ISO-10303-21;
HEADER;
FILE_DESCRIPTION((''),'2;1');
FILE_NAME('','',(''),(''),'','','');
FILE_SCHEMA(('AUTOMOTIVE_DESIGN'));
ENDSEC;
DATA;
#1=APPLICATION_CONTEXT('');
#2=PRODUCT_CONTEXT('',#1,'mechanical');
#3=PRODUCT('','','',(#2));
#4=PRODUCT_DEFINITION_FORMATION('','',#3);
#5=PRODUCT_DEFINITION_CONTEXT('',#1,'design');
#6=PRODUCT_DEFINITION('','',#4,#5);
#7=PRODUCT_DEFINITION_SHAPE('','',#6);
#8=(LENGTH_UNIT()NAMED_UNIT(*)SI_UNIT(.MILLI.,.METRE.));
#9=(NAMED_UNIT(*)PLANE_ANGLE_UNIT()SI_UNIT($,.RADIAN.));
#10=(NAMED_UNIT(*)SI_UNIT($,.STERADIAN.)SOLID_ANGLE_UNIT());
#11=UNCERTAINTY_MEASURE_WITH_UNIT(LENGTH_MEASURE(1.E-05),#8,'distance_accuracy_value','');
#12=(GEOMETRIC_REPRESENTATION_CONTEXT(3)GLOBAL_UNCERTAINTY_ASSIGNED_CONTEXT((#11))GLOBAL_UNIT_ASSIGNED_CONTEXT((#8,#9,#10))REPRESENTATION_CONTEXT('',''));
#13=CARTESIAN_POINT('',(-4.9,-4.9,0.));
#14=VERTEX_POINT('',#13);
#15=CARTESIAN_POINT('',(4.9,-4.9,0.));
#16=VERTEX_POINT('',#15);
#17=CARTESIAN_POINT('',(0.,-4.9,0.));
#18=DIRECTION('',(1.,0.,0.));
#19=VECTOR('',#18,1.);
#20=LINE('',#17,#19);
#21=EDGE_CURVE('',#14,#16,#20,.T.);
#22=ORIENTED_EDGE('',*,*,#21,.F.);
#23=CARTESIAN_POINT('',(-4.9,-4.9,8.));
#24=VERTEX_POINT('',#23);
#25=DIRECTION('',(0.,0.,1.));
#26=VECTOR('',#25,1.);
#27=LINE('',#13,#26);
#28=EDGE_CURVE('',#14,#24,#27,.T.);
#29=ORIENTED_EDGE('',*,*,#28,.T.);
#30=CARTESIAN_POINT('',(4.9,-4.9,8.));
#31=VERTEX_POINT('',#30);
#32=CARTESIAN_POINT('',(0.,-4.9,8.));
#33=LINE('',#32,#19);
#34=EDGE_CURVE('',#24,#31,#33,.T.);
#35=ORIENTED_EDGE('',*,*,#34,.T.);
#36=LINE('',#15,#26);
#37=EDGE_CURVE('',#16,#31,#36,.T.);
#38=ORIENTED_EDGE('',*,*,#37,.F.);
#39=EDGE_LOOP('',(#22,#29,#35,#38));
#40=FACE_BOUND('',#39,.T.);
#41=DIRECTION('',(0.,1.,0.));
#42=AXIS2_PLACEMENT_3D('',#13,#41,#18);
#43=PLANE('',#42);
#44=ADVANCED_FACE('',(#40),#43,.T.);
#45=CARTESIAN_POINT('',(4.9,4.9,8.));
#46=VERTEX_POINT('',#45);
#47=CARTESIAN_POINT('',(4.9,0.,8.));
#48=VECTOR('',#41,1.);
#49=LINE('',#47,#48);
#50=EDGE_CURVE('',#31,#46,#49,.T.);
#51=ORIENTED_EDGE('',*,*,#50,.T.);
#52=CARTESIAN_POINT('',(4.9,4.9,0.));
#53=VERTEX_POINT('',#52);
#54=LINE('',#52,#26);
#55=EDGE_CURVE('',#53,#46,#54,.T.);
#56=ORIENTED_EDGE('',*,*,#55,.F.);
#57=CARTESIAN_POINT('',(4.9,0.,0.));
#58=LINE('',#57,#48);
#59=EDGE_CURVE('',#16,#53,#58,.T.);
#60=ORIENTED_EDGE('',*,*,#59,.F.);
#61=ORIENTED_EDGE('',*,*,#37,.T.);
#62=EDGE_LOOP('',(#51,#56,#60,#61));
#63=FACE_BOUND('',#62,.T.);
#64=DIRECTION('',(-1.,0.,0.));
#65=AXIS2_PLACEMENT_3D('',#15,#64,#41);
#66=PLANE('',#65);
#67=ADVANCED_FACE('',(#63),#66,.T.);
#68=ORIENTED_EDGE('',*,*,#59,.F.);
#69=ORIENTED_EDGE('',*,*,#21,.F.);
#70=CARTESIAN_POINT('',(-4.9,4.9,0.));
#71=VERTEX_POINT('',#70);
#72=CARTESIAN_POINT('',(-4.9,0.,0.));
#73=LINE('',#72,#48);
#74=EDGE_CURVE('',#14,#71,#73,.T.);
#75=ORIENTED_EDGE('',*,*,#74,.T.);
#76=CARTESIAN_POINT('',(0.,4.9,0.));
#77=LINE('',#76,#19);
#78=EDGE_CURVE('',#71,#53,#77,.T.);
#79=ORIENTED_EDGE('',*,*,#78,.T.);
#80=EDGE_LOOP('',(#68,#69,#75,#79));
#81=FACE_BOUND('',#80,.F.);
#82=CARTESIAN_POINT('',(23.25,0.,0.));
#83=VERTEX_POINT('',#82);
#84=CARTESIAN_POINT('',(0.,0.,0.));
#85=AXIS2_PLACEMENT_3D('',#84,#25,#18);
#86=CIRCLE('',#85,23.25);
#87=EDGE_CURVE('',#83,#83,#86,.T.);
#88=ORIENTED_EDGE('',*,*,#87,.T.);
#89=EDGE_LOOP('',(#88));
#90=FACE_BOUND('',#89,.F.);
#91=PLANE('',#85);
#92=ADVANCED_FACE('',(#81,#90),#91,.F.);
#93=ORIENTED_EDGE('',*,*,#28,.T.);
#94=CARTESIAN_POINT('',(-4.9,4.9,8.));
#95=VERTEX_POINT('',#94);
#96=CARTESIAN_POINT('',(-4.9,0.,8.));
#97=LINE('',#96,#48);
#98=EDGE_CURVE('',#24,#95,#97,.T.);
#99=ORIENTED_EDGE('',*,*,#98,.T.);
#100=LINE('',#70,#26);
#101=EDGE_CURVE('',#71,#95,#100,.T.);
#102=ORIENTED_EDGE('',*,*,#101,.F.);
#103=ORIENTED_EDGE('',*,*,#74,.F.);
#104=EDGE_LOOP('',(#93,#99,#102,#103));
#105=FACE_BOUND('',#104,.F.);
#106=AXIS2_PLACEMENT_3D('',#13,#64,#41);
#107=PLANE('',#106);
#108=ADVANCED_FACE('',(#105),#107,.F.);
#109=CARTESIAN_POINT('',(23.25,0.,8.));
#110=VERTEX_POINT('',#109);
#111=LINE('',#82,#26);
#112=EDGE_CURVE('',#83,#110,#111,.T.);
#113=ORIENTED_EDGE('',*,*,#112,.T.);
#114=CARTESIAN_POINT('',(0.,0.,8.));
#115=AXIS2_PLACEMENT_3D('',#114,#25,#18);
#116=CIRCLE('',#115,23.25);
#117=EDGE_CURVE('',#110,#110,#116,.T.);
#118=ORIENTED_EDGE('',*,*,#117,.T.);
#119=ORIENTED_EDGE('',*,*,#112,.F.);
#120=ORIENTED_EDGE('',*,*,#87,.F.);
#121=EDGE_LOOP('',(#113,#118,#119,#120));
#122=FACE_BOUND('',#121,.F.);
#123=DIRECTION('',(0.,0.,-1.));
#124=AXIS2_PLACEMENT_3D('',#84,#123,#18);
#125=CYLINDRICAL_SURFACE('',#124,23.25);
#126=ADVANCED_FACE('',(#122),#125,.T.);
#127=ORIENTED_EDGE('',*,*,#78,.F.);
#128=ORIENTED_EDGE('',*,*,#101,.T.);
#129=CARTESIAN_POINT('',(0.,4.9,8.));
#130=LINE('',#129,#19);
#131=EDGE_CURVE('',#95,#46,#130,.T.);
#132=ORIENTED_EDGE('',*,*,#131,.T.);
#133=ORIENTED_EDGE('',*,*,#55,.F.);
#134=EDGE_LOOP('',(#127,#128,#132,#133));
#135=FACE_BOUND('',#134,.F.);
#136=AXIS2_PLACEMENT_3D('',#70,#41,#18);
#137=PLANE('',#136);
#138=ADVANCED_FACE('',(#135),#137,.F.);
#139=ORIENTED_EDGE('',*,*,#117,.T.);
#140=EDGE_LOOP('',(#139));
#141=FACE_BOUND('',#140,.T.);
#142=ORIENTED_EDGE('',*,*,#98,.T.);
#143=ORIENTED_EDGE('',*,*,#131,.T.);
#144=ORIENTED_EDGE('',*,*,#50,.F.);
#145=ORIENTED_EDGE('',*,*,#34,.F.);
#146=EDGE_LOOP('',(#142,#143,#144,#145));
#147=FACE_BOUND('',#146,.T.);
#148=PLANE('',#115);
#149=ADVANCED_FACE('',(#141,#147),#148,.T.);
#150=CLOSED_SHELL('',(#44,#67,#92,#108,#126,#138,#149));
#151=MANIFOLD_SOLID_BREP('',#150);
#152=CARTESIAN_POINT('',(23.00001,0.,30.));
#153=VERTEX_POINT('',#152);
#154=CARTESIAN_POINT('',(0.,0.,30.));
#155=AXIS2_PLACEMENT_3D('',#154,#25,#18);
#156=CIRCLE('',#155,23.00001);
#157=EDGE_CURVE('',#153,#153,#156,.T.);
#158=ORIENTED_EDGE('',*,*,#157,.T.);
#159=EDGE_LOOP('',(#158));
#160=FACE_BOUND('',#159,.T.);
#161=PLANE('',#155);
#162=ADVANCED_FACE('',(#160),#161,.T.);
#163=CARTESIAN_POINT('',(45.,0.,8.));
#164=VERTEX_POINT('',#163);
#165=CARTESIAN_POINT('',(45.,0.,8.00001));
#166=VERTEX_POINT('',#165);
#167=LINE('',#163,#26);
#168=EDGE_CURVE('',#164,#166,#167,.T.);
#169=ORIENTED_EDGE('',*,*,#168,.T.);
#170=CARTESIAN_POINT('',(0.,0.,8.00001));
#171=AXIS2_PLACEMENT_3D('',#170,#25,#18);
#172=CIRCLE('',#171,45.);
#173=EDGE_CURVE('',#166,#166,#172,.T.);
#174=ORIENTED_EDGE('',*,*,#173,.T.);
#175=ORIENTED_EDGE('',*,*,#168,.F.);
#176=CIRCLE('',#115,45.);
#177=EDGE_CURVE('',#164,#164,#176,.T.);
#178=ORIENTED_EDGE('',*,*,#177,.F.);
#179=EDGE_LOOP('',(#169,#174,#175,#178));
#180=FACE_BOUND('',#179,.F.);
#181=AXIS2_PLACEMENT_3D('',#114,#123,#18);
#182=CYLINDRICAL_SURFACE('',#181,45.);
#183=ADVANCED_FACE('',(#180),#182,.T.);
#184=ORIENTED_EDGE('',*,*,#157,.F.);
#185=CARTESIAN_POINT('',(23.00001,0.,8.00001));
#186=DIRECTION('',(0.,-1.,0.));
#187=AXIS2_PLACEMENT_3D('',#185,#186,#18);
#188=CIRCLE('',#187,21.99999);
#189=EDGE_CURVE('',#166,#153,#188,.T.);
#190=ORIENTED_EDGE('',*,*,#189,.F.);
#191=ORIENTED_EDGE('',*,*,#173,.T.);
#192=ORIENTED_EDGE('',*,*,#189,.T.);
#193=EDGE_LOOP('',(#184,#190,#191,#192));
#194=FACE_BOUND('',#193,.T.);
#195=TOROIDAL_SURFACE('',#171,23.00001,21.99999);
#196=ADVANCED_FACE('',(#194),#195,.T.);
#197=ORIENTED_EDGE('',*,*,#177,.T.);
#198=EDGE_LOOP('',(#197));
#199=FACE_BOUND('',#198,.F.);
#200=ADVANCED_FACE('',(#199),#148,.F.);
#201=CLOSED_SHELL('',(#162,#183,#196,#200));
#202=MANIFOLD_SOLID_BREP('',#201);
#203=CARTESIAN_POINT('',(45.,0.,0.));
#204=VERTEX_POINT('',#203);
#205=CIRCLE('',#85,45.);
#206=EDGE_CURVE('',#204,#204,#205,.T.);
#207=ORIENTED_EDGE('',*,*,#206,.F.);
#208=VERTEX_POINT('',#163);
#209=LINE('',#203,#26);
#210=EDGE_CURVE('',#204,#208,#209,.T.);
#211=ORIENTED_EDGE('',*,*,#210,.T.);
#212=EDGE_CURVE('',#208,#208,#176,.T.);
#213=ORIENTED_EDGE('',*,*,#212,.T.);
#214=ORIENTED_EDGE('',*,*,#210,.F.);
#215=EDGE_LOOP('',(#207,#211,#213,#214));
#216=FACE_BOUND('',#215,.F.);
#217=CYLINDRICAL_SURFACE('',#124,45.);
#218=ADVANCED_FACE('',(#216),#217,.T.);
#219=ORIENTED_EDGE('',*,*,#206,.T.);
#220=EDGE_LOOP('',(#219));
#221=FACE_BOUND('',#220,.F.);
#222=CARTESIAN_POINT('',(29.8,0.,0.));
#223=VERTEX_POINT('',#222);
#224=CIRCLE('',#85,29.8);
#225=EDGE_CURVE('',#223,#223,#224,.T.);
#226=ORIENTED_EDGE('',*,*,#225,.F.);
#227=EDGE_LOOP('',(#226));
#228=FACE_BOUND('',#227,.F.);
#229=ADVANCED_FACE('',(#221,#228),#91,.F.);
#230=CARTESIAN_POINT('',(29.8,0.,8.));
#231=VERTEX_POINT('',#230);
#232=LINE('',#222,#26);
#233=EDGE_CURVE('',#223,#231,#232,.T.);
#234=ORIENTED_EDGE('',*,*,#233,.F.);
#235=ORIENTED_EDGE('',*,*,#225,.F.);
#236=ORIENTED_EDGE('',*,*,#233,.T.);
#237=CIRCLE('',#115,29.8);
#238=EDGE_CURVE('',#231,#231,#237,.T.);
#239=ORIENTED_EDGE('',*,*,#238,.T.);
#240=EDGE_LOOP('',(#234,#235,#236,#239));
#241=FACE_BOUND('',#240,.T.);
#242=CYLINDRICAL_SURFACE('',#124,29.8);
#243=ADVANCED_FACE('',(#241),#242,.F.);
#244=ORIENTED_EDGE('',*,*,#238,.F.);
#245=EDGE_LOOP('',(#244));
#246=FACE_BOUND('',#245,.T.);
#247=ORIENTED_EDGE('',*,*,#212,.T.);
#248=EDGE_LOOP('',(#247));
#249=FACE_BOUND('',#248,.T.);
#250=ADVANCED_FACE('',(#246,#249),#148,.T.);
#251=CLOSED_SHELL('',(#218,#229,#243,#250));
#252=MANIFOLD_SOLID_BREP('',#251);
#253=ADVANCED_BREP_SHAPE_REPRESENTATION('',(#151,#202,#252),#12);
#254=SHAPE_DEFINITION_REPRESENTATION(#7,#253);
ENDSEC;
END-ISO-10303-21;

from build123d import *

# Parameters (mm, degrees)
F0_R     = 23.25
F0_W     = 9.8
F0_H     = 9.8
F1_DEPTH = 8
F0_R_2   = 45
F0_R_3   = 29.8
F2_R     = 45
F2_R_2   = 29.8
F3_DEPTH = 22
F4_R     = 21.99999


# Not quite as in the source:
# - a fillet or chamfer is up to 0.001 mm smaller than in the source, because OpenCascade refuses the exact size


with BuildPart() as f1:
    # F0 (on Top) → F1 (new body)
    with BuildSketch(Plane.XY):
        Circle(F0_R)
        Rectangle(F0_W, F0_H, mode=Mode.SUBTRACT)
    extrude(amount=F1_DEPTH)


with BuildPart() as f1b:
    # F0 (on Top) → F1, piece 2 (new body)
    with BuildSketch(Plane.XY):
        Circle(F0_R_2)
        Circle(F0_R_3, mode=Mode.SUBTRACT)
    extrude(amount=F1_DEPTH)


with BuildPart() as f3:
    # F2 (on face) → F3 (new body)
    with BuildSketch(Plane.XY.offset(8)):
        Circle(F2_R)
        Circle(F2_R_2, mode=Mode.SUBTRACT)
        Circle(F2_R_2)
    extrude(amount=F3_DEPTH)

    # F4 (radius 22 in the source; OpenCascade refuses exactly that, so slightly less here)
    f4_edges = [f3.edges().sort_by_distance(p)[0] for p in [
        (-45, 0, 30),
    ]]
    fillet(f4_edges, radius=F4_R)


solid = Compound([f1.part, f1b.part, f3.part])
